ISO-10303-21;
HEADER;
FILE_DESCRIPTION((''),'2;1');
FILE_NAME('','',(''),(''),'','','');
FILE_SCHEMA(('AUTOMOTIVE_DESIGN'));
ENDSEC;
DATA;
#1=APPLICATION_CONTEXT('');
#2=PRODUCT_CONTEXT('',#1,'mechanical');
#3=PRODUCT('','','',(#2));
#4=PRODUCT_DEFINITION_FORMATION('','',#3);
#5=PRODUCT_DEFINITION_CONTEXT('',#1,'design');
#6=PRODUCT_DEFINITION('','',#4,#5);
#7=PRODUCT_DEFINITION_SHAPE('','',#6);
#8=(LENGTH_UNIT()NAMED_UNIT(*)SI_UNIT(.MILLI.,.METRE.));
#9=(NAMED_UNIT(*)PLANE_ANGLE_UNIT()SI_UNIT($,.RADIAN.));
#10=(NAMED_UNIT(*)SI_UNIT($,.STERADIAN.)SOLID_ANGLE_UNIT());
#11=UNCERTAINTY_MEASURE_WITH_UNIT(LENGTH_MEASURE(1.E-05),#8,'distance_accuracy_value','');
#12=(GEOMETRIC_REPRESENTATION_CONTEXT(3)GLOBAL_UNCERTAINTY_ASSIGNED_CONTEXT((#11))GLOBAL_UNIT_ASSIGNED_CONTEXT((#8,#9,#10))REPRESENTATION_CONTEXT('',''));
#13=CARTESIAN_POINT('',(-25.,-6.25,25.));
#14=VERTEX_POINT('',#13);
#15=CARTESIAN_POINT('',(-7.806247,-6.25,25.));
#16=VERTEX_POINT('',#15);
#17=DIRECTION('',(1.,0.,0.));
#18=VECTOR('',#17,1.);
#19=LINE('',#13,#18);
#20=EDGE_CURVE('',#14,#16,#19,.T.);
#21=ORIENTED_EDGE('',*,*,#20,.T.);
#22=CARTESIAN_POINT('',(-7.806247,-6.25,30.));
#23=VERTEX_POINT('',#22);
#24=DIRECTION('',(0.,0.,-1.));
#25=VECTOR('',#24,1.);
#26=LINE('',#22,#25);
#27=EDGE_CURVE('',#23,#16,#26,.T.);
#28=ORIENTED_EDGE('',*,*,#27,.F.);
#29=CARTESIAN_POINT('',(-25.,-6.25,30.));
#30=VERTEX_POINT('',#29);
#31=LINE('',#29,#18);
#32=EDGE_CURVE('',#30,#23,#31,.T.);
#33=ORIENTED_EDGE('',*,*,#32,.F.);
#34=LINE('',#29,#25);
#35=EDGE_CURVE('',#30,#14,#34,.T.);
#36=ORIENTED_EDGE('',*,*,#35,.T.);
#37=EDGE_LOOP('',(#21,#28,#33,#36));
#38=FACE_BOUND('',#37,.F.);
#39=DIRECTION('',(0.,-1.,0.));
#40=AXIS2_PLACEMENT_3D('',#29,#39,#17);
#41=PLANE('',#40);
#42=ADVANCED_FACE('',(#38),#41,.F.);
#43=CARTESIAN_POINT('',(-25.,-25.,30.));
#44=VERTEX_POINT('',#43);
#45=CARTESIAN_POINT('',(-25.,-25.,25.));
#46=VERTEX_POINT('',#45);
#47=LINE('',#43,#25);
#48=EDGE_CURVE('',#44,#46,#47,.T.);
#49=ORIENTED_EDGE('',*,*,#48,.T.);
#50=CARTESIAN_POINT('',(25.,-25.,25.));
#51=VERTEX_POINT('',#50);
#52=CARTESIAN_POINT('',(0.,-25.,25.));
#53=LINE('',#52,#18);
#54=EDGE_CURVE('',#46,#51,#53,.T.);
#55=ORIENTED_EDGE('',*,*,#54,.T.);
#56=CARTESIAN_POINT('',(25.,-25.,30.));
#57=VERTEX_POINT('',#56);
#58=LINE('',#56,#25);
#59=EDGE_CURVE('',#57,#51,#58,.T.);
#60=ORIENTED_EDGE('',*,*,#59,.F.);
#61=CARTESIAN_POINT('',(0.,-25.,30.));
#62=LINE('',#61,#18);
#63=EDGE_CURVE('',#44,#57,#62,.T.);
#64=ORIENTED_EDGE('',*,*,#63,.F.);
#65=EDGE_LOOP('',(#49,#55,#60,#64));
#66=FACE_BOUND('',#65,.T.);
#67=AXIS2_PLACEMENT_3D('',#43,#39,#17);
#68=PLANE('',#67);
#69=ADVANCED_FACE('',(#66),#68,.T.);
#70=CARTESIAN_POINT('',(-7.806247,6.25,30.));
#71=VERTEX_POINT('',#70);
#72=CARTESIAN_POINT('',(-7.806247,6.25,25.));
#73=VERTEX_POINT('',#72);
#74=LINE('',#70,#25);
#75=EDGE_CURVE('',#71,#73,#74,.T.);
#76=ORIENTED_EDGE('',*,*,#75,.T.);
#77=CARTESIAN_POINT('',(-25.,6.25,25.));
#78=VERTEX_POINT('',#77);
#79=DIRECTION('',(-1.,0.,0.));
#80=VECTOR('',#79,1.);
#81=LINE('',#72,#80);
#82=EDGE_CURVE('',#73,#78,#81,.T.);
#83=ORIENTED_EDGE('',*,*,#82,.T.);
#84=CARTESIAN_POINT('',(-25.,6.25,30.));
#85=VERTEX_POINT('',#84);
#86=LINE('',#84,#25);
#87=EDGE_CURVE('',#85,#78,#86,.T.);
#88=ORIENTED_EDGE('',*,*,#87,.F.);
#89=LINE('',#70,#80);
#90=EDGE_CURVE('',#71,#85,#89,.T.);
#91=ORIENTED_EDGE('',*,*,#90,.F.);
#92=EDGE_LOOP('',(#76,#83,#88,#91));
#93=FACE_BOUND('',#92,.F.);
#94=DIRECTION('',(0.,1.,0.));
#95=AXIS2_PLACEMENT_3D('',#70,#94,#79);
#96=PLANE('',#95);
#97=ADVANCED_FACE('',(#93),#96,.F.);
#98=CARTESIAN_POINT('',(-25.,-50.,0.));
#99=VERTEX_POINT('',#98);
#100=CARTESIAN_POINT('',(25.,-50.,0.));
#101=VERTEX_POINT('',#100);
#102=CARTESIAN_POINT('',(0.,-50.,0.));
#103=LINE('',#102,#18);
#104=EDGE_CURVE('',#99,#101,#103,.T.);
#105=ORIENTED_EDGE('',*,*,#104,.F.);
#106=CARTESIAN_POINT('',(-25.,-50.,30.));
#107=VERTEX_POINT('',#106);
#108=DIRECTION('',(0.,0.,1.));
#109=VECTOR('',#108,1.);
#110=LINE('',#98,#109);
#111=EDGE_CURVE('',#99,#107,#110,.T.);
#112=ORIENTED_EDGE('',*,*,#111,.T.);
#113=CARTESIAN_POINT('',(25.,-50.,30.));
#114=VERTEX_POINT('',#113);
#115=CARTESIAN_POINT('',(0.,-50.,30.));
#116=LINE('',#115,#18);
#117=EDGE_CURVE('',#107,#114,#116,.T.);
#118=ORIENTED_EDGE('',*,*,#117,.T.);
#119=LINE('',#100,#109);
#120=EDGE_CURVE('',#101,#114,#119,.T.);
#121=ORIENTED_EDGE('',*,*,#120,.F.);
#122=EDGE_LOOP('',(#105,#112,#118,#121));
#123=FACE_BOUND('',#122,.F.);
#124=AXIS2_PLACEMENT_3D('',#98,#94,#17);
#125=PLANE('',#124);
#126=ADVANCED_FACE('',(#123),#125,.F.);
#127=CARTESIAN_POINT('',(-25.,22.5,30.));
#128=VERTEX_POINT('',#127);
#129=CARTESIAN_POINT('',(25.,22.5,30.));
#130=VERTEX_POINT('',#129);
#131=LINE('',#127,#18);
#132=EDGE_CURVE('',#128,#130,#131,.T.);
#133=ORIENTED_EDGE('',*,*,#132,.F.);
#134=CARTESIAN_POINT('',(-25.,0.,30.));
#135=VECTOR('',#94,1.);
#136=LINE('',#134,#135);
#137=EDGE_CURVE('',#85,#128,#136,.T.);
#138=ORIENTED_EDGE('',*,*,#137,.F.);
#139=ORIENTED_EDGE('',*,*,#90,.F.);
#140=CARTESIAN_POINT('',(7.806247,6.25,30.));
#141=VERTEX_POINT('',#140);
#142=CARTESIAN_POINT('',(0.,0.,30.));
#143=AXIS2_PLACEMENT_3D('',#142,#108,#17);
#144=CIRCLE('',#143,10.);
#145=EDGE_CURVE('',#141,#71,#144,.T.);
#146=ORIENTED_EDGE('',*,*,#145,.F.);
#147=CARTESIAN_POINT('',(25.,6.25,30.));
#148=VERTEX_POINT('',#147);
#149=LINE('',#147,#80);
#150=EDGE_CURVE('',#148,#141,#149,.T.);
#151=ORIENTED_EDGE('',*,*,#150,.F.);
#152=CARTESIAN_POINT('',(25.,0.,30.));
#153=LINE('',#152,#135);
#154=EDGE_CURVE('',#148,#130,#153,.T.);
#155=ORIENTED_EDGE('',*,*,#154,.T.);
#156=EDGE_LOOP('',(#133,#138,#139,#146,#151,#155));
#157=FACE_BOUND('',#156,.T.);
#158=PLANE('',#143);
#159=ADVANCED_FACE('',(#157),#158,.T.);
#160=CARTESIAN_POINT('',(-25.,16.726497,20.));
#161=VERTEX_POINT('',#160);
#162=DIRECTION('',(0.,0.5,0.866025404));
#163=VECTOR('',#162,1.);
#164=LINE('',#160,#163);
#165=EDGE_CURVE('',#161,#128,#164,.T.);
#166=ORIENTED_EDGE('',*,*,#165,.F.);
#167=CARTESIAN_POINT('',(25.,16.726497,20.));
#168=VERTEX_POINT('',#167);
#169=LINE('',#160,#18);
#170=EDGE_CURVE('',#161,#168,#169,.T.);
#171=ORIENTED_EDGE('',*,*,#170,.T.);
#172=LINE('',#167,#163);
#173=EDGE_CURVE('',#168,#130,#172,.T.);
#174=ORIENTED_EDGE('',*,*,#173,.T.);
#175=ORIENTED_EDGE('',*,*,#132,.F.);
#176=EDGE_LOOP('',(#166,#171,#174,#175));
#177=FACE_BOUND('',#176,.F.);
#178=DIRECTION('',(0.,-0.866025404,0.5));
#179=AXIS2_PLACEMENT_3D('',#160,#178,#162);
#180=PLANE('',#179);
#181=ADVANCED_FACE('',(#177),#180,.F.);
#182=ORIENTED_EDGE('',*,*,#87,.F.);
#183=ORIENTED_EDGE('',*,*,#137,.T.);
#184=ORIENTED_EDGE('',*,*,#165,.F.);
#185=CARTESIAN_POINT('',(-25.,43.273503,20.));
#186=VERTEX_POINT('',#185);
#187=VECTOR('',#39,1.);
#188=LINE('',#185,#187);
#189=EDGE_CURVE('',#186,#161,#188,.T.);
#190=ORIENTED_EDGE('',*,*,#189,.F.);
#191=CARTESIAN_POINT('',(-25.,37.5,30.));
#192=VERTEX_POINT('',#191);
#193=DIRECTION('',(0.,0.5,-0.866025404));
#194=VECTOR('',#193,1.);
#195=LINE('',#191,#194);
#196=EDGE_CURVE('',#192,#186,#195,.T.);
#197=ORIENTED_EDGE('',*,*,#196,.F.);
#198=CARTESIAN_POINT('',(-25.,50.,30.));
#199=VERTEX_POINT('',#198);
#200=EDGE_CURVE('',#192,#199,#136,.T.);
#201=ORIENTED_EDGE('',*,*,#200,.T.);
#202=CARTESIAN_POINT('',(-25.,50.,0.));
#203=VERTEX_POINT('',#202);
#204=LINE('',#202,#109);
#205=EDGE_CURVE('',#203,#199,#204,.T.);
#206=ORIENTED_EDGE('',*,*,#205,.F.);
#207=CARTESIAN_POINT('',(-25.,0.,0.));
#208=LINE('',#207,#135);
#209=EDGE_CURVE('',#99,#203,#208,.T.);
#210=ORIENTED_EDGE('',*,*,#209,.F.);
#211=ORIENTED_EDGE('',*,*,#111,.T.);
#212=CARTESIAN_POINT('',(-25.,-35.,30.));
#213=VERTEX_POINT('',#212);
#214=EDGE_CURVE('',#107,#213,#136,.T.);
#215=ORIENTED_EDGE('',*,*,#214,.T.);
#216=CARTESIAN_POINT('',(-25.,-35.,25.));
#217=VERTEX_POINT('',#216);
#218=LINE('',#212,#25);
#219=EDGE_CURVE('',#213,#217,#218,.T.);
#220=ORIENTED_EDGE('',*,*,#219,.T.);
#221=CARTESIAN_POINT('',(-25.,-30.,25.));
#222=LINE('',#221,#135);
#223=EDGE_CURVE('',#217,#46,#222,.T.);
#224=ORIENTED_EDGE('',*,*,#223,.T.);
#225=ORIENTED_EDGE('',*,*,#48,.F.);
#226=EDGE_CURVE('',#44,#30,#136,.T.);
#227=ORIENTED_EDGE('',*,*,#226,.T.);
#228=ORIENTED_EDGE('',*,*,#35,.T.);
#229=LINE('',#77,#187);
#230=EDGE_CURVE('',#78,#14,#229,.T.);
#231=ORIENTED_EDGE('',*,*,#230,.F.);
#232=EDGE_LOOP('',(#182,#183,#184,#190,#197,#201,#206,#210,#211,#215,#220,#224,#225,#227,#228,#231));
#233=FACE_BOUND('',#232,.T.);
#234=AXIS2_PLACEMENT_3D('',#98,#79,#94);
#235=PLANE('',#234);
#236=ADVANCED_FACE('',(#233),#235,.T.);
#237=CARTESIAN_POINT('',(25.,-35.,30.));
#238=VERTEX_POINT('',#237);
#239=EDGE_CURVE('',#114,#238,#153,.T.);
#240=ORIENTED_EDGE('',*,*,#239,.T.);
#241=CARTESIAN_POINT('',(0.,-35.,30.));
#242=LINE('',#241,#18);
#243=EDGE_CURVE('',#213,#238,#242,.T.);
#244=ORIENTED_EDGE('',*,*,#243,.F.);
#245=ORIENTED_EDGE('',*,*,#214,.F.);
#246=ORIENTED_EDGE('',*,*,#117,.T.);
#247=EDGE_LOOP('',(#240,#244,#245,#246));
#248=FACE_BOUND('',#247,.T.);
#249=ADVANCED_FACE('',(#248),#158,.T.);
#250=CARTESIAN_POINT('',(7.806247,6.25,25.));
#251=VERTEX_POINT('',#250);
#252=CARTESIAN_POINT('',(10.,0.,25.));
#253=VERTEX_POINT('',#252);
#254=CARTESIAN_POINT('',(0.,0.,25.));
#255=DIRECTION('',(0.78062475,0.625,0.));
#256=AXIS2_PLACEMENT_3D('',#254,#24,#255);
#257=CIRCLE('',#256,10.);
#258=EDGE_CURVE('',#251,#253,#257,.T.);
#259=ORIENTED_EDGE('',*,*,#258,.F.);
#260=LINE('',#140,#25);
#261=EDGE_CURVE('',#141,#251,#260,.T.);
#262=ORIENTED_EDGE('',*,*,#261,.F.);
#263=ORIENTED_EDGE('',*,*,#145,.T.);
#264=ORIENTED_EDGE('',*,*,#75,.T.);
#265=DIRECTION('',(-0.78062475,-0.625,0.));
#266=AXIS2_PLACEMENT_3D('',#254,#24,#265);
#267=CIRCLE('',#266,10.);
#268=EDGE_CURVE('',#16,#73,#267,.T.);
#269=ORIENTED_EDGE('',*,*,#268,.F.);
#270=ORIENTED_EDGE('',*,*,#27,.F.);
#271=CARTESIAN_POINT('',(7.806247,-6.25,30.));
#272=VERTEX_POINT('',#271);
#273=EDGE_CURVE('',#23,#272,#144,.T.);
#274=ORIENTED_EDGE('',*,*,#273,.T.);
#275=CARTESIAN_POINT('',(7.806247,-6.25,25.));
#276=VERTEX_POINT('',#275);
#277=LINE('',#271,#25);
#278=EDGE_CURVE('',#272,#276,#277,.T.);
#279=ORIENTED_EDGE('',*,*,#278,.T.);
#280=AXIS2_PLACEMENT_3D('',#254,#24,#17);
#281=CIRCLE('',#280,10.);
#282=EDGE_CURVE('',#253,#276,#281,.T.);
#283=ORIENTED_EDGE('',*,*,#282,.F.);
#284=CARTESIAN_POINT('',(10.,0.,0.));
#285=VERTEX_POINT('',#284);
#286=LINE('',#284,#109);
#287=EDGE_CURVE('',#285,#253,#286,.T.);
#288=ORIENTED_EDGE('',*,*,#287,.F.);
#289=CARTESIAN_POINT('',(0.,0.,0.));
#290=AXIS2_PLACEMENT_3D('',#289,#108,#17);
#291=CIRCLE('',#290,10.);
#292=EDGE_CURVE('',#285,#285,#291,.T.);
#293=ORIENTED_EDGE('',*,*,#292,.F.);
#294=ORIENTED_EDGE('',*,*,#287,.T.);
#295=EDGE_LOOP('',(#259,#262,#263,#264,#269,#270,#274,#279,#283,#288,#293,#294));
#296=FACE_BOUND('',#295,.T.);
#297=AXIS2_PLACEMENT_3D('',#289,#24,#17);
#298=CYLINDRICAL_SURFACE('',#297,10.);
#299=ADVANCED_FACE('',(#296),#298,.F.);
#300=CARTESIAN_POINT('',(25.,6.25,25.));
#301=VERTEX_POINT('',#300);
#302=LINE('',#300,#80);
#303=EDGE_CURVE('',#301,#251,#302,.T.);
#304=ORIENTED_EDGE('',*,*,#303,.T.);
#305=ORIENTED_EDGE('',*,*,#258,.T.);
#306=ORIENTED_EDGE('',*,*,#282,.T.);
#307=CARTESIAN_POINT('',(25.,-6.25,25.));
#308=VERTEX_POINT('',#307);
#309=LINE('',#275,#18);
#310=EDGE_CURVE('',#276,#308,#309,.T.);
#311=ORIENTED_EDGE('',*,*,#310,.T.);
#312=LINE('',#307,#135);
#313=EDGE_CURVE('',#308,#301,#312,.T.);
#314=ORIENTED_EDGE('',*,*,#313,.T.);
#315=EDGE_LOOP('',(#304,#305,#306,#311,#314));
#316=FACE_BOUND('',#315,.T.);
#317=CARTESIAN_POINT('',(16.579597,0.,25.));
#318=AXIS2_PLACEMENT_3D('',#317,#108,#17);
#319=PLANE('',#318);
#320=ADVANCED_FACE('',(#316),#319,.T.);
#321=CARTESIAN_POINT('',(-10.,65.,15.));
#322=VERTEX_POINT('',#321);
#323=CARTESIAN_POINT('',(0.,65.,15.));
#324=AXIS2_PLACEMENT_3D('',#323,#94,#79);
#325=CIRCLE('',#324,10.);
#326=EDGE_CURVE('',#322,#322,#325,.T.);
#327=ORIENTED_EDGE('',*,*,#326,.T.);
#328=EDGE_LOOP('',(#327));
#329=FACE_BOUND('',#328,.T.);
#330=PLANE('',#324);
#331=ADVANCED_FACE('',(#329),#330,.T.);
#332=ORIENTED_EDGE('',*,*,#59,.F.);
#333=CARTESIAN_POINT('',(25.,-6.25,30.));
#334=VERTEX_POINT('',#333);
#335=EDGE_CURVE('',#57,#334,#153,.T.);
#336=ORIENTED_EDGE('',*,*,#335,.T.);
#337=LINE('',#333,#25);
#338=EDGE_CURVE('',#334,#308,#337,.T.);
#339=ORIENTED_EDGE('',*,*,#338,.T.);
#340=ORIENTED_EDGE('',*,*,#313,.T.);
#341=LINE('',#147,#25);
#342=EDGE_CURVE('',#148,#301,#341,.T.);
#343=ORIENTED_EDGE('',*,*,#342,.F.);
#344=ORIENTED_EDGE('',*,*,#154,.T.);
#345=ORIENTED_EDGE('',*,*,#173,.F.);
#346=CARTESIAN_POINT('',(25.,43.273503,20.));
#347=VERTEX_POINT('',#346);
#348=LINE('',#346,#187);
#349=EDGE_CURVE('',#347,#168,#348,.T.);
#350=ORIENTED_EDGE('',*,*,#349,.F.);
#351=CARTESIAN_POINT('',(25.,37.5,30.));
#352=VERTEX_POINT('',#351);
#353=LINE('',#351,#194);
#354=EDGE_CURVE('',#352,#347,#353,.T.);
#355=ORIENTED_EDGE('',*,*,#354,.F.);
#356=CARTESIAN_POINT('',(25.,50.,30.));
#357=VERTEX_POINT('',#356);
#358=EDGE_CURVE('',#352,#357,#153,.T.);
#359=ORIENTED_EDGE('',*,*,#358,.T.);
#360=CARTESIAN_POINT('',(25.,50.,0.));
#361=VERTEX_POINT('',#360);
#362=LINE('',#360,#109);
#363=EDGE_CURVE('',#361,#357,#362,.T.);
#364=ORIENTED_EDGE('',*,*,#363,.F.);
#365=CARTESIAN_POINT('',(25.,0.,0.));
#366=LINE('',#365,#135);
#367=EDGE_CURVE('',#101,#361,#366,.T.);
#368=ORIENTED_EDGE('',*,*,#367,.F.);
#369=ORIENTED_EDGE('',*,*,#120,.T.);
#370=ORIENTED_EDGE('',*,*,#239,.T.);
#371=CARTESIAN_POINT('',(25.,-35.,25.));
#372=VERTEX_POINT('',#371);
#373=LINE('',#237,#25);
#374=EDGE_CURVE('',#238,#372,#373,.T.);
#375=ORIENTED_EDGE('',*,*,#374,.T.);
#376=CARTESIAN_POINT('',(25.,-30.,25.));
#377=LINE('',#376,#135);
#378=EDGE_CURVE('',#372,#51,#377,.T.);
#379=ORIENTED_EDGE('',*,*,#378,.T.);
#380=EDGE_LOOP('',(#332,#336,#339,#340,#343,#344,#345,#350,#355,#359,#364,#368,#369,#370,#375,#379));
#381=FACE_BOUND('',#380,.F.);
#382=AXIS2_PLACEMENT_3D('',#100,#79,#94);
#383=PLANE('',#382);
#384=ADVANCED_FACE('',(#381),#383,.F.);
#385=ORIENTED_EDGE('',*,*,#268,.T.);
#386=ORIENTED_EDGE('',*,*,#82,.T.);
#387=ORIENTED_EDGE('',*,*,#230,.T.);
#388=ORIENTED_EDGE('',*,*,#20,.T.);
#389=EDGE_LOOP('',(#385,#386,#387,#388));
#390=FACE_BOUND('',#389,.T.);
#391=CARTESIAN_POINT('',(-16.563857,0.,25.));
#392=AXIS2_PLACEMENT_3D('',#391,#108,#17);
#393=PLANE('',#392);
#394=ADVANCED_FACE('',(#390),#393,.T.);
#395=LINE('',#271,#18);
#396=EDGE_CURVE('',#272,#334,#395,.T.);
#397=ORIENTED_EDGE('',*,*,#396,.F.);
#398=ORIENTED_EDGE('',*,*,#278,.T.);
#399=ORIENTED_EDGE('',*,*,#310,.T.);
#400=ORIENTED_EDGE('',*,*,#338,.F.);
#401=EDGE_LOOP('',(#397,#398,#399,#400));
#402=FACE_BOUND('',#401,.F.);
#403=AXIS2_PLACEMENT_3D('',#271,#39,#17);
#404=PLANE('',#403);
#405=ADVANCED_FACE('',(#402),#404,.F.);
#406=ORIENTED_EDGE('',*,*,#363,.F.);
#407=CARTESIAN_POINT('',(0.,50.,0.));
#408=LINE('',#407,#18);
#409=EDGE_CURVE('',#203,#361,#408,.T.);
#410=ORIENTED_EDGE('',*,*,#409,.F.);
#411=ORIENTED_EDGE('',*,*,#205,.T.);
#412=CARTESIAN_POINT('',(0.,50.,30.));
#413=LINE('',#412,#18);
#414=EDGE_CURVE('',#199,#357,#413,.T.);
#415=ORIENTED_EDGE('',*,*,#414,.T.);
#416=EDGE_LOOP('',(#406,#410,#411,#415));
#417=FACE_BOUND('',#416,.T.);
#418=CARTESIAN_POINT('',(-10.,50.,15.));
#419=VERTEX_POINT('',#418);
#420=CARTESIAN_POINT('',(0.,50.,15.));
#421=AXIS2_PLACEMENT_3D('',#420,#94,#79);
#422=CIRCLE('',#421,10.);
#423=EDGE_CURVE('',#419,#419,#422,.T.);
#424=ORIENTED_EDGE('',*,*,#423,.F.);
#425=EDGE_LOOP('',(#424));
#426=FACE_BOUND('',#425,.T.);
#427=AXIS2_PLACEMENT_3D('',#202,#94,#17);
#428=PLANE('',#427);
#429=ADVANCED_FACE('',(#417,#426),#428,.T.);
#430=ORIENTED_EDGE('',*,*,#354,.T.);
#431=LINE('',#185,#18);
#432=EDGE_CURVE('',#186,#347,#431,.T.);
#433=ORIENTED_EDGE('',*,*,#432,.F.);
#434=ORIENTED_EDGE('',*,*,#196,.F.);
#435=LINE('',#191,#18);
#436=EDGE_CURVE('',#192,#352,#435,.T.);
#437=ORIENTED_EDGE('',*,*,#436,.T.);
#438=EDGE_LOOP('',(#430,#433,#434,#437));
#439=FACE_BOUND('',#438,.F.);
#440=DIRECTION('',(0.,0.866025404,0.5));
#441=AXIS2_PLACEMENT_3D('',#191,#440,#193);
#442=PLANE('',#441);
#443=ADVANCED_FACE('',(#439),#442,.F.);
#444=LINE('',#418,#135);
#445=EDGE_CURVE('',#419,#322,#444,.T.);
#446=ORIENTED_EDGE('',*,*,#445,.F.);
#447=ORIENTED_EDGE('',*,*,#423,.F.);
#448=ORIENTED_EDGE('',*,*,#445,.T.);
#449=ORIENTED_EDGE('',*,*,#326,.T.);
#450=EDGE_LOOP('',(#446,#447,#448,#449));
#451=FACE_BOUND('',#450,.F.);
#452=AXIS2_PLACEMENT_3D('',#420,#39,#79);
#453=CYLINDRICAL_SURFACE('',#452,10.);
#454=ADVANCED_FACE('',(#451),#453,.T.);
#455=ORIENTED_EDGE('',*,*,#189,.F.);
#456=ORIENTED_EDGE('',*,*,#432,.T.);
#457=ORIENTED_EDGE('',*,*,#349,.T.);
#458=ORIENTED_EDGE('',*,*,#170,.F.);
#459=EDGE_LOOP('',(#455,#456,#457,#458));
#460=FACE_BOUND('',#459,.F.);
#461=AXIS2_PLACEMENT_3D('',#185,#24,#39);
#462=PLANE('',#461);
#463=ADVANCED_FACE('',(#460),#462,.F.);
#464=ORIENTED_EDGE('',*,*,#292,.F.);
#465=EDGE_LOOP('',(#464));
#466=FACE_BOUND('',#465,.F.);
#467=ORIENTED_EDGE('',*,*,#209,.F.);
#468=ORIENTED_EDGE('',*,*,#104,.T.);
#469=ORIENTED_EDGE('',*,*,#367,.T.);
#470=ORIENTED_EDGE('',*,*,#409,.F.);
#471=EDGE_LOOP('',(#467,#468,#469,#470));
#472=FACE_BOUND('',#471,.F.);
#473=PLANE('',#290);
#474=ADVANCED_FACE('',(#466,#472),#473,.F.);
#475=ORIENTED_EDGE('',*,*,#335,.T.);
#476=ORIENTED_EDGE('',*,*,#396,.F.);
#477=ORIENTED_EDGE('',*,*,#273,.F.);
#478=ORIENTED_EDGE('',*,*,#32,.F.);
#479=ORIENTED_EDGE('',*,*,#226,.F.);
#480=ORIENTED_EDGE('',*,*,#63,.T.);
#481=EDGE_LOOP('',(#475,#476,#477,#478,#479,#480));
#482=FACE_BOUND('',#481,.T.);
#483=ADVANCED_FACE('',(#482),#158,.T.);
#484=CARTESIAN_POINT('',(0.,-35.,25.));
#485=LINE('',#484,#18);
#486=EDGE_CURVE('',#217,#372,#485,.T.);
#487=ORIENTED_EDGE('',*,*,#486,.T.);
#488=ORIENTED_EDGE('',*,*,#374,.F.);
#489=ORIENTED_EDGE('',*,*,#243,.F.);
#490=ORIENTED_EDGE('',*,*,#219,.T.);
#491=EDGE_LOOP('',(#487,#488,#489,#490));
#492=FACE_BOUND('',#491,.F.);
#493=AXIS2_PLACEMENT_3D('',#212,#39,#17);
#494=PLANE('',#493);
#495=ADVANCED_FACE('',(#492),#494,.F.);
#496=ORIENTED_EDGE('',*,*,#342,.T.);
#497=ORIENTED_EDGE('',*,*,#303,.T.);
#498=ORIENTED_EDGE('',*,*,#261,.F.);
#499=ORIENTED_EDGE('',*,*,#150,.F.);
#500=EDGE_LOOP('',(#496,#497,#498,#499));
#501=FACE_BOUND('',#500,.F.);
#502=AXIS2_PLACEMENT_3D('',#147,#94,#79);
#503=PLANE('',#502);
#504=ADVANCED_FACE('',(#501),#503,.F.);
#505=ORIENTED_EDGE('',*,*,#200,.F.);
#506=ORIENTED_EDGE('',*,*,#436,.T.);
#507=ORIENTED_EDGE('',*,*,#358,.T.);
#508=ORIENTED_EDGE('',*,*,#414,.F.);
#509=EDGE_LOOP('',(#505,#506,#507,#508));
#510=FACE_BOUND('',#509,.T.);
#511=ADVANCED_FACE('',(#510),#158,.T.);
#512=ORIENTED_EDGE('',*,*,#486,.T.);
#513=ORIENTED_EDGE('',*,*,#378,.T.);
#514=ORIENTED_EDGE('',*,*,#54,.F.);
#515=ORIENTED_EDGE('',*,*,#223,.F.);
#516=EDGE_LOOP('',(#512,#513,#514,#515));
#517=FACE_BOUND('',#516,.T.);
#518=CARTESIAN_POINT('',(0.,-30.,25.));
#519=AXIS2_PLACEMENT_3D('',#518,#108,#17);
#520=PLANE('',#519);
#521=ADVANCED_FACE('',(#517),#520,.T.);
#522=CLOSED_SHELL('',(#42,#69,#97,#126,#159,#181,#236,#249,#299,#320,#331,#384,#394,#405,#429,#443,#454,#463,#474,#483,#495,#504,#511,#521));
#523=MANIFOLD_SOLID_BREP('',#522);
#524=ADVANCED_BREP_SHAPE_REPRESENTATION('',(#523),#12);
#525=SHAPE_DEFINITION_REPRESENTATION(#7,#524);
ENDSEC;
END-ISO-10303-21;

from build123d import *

# Parameters (mm, degrees)
F0_W     = 50
F0_H     = 100
F0_R     = 10
F1_DEPTH = 30
F2_W     = 50
F2_H     = 10
F3_DEPTH = 5
F5_DEPTH = 50
F6_R     = 10
F7_DEPTH = 15


with BuildPart() as f1:
    # F0 (on Top) → F1 (new body)
    with BuildSketch(Plane.XY):
        Rectangle(F0_W, F0_H)
        Circle(F0_R, mode=Mode.SUBTRACT)
    extrude(amount=F1_DEPTH)

    # F2 (on face) → F3 (cut)
    with BuildSketch(Plane.XY.offset(30)):
        with BuildLine():
            Line((7.806247498, -6.25), (25, -6.25))
            Line((25, -6.25), (25, 6.25))
            Line((25, 6.25), (7.806247498, 6.25))
            ThreePointArc((7.806247498, 6.25), (9.4356365705, 3.3119122135), (10, 0))
            ThreePointArc((10, 0), (9.4356365705, -3.3119122135), (7.806247498, -6.25))
        make_face()
        with Locations((0, -30)):
            Rectangle(F2_W, F2_H)
        with BuildLine():
            Line((-25, 6.25), (-25, -6.25))
            Line((-25, -6.25), (-7.806247498, -6.25))
            ThreePointArc((-7.806247498, -6.25), (-10, 0), (-7.806247498, 6.25))
            Line((-7.806247498, 6.25), (-25, 6.25))
        make_face()
    extrude(amount=-F3_DEPTH, mode=Mode.SUBTRACT)

    # F4 (on face) → F5 (cut, through all)
    with BuildSketch(Plane(origin=(-25, 0, 0), x_dir=(0, -1, 0), z_dir=(-1, 0, 0))):
        Polygon((-22.5, 30), (-37.5, 30), (-43.2735026919, 20), (-16.7264973081, 20), align=None)
    extrude(amount=-F5_DEPTH, mode=Mode.SUBTRACT)

    # F6 (on face) → F7 (join)
    with BuildSketch(Plane(origin=(0, 50, 0), x_dir=(-1, 0, 0), z_dir=(0, 1, 0))):
        with Locations((0, 15)):
            Circle(F6_R)
    extrude(amount=F7_DEPTH)


solid = f1.part
